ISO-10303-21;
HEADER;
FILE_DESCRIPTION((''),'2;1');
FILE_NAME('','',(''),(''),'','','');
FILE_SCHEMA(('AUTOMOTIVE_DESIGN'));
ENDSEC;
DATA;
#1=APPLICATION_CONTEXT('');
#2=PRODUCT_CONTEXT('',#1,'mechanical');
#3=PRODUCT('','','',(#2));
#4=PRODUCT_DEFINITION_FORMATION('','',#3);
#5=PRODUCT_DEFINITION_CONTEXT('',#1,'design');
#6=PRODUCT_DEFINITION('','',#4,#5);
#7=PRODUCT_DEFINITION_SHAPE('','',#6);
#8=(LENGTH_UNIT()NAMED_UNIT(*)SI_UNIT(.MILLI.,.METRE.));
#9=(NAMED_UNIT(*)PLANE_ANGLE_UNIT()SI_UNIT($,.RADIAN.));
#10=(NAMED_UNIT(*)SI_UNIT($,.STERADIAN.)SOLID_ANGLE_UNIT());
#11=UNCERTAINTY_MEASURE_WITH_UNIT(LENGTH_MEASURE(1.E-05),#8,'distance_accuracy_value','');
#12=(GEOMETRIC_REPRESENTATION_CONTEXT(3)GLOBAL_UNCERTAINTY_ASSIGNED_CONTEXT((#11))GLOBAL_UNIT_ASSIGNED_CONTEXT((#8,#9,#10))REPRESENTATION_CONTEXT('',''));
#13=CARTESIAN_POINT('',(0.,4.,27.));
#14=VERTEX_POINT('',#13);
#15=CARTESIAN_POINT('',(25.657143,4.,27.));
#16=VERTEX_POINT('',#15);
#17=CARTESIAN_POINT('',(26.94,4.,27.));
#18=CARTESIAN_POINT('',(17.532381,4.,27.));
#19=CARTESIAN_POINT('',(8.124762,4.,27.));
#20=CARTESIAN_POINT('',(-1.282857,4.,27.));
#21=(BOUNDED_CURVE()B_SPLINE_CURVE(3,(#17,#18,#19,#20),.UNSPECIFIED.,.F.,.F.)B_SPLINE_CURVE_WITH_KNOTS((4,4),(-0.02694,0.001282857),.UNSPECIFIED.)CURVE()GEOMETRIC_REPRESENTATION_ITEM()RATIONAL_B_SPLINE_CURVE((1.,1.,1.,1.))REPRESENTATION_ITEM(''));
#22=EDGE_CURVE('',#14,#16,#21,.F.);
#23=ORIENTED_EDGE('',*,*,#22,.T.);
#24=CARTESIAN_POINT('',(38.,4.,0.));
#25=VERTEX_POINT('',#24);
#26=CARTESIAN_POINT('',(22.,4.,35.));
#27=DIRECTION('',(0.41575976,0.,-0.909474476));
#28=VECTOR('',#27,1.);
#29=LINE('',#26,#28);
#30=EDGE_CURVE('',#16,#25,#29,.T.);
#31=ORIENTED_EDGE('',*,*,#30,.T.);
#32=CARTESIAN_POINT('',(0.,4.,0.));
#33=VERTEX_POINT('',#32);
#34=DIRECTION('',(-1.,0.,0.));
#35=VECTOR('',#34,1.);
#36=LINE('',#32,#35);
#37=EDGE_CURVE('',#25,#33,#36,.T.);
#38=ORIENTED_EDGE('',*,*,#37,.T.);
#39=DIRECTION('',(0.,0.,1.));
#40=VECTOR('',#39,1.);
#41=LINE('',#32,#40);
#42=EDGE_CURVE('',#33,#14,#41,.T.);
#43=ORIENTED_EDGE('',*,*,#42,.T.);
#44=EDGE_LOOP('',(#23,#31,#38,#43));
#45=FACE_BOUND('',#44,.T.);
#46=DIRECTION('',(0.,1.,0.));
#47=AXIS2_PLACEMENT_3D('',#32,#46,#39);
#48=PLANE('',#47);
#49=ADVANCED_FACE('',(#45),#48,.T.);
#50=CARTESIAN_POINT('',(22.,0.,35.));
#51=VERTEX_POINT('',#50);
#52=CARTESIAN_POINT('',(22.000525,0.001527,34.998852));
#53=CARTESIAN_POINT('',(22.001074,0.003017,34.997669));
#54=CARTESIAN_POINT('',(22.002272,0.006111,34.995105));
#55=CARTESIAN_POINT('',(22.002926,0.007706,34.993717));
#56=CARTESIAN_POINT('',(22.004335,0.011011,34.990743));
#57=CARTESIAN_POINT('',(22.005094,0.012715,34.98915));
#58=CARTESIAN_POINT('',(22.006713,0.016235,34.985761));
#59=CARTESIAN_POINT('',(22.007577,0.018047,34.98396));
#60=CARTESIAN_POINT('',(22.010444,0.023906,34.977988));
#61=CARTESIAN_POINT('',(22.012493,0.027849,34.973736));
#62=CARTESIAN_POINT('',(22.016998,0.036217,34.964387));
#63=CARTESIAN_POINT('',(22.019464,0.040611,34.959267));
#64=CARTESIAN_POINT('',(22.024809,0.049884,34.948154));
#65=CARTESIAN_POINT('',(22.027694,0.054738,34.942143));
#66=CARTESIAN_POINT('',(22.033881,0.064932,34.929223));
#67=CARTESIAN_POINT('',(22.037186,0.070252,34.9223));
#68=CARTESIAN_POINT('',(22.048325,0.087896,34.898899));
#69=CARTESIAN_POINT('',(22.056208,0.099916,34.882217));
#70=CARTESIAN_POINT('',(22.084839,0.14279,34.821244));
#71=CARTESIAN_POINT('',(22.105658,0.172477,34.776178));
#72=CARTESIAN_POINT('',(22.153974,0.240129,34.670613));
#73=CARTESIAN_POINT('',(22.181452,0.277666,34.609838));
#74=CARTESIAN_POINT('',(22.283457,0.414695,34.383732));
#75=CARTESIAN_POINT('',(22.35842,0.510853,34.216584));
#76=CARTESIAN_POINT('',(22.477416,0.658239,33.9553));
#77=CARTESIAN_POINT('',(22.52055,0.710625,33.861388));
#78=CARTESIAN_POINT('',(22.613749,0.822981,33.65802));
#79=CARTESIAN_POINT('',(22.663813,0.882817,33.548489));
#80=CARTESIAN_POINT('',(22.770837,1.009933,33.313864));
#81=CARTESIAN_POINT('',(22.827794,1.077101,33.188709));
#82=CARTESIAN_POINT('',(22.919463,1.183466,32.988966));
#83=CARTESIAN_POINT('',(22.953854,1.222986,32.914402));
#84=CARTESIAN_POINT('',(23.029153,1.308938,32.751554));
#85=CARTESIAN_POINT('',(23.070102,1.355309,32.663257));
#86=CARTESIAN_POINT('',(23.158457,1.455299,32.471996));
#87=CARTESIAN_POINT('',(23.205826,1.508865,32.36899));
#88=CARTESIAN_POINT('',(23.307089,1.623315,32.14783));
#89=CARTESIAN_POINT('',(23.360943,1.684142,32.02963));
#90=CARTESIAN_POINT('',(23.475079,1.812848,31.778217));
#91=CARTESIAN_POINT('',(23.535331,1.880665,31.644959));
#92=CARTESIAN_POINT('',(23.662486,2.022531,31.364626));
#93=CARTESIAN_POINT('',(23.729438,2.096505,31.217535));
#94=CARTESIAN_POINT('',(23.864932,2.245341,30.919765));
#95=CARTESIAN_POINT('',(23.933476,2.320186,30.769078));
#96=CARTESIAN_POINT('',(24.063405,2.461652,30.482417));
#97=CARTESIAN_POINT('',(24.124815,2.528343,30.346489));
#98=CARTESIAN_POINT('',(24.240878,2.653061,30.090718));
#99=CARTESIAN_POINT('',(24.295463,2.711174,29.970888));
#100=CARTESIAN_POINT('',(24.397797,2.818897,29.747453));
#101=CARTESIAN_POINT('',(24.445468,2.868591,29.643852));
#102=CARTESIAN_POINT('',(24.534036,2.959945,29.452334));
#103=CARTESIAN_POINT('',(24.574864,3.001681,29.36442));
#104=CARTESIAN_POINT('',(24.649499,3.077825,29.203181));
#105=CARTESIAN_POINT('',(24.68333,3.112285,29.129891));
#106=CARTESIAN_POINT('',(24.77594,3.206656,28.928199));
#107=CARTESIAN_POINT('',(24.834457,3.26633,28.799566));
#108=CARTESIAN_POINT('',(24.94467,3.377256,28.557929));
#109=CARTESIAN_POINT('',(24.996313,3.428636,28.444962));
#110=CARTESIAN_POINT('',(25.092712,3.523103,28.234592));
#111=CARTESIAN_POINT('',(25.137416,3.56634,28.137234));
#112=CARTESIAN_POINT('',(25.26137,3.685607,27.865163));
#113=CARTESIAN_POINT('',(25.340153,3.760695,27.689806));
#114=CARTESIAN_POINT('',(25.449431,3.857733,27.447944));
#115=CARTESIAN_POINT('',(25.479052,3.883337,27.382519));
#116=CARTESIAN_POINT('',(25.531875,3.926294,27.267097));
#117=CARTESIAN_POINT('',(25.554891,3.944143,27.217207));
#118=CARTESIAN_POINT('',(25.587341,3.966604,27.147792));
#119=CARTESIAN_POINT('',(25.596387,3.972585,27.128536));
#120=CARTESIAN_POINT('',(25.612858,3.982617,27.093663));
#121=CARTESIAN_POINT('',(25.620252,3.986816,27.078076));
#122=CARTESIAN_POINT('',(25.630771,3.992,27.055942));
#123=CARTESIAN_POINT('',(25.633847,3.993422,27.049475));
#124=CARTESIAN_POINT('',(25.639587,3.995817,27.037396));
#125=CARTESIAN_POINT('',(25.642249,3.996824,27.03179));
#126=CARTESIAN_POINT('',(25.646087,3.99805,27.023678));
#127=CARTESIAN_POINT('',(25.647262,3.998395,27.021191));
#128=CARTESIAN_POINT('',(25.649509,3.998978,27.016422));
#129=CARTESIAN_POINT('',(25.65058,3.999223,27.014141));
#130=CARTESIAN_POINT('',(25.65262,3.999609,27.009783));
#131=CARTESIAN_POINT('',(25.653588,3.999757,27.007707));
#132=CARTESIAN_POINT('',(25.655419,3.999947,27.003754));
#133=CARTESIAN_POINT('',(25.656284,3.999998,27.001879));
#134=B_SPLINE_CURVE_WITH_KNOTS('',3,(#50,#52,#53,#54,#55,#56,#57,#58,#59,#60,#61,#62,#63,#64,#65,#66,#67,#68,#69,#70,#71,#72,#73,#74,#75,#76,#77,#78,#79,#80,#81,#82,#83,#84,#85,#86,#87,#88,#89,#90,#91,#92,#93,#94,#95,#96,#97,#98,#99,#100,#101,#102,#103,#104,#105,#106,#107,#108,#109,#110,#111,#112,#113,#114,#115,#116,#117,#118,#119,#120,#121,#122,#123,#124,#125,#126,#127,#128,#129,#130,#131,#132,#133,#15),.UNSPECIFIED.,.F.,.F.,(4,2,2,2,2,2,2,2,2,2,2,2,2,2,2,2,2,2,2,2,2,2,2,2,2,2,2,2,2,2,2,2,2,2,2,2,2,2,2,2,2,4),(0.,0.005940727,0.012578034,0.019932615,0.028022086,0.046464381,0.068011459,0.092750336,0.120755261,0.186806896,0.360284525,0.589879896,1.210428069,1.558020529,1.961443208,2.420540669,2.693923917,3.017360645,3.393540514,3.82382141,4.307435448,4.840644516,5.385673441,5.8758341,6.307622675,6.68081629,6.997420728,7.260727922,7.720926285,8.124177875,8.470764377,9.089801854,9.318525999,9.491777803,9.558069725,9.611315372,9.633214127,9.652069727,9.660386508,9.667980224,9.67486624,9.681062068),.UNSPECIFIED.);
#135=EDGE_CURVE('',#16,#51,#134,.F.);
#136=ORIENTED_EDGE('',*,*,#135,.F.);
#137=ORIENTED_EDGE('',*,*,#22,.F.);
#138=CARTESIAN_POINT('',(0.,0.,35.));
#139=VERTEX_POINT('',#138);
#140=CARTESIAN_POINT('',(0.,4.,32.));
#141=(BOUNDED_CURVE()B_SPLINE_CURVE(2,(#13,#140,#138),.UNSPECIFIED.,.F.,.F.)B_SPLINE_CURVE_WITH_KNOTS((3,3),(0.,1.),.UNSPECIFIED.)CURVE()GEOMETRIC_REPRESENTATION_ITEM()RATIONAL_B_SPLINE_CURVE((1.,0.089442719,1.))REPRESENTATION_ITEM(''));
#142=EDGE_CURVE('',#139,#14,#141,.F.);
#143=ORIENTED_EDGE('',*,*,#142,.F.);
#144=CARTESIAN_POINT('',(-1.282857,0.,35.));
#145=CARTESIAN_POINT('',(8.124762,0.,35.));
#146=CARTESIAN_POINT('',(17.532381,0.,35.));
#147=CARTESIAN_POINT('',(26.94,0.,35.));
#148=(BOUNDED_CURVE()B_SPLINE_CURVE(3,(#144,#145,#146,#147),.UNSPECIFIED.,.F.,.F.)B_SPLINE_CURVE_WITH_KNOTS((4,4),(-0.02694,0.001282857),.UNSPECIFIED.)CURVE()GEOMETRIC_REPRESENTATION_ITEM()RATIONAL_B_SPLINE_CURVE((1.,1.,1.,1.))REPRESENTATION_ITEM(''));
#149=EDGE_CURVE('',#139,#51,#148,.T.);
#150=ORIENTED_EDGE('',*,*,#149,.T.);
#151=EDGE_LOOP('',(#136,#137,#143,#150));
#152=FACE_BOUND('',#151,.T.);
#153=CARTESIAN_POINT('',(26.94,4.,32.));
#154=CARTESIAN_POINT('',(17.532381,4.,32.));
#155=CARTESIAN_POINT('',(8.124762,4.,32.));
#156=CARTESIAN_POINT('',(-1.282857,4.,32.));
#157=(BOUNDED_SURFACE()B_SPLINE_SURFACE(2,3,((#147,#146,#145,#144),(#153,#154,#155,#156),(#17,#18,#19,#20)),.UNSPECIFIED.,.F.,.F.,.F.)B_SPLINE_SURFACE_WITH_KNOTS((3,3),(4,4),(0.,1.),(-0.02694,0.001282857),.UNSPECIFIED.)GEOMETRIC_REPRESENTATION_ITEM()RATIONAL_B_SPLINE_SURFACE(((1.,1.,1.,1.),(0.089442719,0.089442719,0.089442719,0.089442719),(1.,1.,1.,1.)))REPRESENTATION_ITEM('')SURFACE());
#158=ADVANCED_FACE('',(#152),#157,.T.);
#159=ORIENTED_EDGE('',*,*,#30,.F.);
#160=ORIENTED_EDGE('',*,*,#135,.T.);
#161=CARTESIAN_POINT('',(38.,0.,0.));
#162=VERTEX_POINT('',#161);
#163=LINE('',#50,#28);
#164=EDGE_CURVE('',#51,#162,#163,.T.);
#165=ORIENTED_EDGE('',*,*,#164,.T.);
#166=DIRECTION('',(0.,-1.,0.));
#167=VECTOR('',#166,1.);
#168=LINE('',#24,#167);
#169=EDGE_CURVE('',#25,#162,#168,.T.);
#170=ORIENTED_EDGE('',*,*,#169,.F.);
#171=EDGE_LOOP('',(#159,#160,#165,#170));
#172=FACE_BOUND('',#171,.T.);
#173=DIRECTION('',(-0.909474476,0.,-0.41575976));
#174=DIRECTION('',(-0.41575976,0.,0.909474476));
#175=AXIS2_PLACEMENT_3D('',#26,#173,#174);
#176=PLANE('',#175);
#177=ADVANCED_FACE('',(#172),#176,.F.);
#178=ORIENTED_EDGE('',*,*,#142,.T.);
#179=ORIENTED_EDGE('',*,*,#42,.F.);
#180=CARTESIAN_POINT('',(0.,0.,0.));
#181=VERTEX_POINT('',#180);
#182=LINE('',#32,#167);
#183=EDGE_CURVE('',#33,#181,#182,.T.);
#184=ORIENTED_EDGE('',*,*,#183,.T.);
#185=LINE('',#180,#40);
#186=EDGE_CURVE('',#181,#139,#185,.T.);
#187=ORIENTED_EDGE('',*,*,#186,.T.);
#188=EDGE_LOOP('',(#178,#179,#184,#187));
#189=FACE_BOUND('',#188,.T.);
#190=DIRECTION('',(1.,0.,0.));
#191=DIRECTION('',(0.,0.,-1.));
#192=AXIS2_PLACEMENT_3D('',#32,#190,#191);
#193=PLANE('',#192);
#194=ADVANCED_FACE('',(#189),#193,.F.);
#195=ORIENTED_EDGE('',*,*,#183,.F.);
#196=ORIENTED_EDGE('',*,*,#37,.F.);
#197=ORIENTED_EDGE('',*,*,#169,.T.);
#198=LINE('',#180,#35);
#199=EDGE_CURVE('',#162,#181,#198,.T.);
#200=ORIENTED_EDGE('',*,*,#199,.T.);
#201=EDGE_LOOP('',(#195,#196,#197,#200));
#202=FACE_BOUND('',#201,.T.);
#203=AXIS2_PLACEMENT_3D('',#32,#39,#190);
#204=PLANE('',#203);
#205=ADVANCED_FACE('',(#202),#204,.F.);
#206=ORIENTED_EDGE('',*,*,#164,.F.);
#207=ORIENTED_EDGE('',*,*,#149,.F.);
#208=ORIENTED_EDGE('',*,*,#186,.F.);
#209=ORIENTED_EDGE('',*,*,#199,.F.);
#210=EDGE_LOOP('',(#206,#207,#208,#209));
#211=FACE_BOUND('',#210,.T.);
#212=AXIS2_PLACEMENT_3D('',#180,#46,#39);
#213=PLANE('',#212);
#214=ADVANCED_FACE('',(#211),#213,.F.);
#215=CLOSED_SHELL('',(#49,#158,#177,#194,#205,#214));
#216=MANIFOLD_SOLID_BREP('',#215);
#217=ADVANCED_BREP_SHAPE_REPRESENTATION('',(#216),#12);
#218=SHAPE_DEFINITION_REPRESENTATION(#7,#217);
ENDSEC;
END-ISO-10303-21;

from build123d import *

# Parameters (mm, degrees)
RESSALTO_EXTRUS_O1_DEPTH = 4
FILETE1_DEPTH            = 38


with BuildPart() as part:
    # Esboço1 → Ressalto-extrusão1 (new body)
    with BuildSketch(Plane(origin=(0, 0, 0), x_dir=(1, 0, 0), z_dir=(0, 1, 0))):
        Polygon((0, 0), (38, 0), (22, -35), (0, -35), align=None)
    extrude(amount=RESSALTO_EXTRUS_O1_DEPTH)

    # Filete1: read off the stored shape, not the designer's step
    # Filete1 outline → Filete1 (cut)
    with BuildSketch(Plane.YZ):
        with BuildLine():
            Line((4, 35), (0, 35))
            add(Edge.make_bspline(
                [(0, 35), (4, 32), (4, 27)],
                knots=[0, 0, 0, 1, 1, 1], degree=2, weights=[1, 0.089442719, 1]))
            Line((4, 27), (4, 35))
        make_face()
    extrude(amount=FILETE1_DEPTH, mode=Mode.SUBTRACT)


solid = part.part
